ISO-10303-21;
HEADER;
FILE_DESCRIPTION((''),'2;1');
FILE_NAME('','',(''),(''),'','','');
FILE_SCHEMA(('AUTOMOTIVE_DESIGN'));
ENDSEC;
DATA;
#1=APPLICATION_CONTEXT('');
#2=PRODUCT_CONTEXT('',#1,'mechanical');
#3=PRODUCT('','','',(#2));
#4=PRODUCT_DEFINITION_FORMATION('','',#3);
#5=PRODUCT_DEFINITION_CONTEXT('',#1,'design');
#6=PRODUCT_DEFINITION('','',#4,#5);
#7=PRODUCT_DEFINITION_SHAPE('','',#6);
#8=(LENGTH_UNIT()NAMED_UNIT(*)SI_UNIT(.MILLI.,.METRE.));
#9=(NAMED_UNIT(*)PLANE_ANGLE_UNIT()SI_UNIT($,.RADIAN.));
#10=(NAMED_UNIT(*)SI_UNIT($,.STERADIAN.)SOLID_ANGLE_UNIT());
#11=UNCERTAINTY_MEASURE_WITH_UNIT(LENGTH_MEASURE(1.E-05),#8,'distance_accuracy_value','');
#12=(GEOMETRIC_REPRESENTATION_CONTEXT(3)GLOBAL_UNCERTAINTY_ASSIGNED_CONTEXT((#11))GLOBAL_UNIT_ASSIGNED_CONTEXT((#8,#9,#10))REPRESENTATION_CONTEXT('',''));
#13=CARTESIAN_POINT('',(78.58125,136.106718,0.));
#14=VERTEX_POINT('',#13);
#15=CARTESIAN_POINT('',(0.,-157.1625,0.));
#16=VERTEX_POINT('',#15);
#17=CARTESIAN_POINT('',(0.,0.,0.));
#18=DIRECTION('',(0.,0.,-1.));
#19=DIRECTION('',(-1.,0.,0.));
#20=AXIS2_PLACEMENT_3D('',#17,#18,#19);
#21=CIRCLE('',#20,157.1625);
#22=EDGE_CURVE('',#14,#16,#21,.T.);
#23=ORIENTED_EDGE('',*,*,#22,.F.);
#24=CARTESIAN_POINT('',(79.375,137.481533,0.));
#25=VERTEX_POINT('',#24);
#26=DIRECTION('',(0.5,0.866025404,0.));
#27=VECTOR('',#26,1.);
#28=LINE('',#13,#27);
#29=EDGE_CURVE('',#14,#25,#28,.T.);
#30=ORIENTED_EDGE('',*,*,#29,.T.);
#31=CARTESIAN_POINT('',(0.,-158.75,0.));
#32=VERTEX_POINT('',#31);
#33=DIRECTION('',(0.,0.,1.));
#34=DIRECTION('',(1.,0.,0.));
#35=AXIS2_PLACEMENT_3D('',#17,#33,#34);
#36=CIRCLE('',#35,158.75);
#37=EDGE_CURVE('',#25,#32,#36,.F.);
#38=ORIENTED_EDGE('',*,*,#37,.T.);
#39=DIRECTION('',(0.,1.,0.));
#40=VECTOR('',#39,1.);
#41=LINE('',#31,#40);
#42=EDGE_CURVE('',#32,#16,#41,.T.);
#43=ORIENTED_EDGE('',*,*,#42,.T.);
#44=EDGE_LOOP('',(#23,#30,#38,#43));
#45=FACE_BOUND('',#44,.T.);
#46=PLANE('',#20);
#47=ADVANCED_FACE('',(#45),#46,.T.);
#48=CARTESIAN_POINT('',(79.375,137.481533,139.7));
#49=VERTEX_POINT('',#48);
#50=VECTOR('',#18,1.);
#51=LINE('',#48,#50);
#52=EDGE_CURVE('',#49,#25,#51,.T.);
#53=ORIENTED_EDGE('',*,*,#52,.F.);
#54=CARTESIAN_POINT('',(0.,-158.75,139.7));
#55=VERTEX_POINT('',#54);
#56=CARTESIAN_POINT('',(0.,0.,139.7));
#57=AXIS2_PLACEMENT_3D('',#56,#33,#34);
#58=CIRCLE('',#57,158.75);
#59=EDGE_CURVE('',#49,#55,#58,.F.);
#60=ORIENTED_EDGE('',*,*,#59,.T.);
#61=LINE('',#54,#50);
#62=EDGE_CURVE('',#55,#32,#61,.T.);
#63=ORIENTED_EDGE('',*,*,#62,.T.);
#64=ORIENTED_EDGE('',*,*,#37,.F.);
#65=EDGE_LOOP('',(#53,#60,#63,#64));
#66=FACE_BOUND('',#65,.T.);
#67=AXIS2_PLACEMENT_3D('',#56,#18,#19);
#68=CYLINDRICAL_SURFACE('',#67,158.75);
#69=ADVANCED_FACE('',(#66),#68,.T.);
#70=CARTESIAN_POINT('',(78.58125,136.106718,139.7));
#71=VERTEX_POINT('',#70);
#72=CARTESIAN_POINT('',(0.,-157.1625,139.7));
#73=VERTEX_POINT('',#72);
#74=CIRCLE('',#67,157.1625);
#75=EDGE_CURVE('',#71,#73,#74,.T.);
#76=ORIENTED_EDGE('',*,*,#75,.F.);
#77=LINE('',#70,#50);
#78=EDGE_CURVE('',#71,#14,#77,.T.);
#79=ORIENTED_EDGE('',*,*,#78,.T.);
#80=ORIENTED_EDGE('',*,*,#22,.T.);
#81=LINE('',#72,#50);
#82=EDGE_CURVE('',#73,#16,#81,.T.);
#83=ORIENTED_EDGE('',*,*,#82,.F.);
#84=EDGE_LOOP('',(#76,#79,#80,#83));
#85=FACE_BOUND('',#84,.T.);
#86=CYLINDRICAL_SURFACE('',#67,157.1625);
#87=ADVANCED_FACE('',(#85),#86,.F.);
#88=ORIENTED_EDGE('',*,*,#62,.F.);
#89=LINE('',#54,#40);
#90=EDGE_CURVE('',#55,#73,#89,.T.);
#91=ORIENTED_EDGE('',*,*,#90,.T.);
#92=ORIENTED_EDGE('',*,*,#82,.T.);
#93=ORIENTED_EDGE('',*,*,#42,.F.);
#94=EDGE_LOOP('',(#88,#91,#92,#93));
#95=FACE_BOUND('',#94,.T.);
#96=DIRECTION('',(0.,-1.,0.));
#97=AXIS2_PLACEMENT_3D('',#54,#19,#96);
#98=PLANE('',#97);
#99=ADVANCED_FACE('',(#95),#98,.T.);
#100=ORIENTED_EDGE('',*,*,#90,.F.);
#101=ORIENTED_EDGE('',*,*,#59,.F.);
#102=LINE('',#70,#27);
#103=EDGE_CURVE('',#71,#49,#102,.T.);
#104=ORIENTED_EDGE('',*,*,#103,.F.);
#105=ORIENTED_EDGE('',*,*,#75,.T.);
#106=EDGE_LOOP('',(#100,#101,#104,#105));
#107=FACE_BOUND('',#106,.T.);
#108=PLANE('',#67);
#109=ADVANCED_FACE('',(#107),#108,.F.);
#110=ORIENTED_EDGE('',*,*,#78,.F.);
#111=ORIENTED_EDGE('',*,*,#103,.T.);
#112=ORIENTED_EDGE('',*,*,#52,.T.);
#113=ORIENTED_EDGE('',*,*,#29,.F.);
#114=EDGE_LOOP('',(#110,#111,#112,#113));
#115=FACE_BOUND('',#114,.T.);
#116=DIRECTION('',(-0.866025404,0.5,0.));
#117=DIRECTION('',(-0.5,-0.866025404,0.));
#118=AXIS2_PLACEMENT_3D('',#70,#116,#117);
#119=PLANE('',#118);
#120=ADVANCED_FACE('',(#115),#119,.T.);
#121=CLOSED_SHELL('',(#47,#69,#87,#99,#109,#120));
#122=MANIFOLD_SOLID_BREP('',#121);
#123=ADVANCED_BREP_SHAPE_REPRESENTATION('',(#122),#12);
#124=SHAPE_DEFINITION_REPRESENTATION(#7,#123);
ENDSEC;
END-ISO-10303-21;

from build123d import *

# Parameters (mm, degrees)
BASE_FLANGE1_DEPTH = 139.7


# Sheet-metal steps are written as plain solids
with BuildPart() as part:
    # Sketch1 → Base-Flange1 (new body)
    with BuildSketch(Plane.XY):
        with BuildLine():
            ThreePointArc((78.58125, 136.106717522), (136.106717522, 78.58125), (157.1625, 0))
            ThreePointArc((157.1625, 0), (111.130669498, -111.130669498), (0, -157.1625))
            Line((0, -157.1625), (0, -158.75))
            ThreePointArc((0, -158.75), (112.253201513, -112.253201513), (158.75, 0))
            ThreePointArc((158.75, 0), (137.481532851, 79.375), (79.375, 137.481532851))
            Line((79.375, 137.481532851), (78.58125, 136.106717522))
        make_face()
    extrude(amount=BASE_FLANGE1_DEPTH)


solid = part.part
